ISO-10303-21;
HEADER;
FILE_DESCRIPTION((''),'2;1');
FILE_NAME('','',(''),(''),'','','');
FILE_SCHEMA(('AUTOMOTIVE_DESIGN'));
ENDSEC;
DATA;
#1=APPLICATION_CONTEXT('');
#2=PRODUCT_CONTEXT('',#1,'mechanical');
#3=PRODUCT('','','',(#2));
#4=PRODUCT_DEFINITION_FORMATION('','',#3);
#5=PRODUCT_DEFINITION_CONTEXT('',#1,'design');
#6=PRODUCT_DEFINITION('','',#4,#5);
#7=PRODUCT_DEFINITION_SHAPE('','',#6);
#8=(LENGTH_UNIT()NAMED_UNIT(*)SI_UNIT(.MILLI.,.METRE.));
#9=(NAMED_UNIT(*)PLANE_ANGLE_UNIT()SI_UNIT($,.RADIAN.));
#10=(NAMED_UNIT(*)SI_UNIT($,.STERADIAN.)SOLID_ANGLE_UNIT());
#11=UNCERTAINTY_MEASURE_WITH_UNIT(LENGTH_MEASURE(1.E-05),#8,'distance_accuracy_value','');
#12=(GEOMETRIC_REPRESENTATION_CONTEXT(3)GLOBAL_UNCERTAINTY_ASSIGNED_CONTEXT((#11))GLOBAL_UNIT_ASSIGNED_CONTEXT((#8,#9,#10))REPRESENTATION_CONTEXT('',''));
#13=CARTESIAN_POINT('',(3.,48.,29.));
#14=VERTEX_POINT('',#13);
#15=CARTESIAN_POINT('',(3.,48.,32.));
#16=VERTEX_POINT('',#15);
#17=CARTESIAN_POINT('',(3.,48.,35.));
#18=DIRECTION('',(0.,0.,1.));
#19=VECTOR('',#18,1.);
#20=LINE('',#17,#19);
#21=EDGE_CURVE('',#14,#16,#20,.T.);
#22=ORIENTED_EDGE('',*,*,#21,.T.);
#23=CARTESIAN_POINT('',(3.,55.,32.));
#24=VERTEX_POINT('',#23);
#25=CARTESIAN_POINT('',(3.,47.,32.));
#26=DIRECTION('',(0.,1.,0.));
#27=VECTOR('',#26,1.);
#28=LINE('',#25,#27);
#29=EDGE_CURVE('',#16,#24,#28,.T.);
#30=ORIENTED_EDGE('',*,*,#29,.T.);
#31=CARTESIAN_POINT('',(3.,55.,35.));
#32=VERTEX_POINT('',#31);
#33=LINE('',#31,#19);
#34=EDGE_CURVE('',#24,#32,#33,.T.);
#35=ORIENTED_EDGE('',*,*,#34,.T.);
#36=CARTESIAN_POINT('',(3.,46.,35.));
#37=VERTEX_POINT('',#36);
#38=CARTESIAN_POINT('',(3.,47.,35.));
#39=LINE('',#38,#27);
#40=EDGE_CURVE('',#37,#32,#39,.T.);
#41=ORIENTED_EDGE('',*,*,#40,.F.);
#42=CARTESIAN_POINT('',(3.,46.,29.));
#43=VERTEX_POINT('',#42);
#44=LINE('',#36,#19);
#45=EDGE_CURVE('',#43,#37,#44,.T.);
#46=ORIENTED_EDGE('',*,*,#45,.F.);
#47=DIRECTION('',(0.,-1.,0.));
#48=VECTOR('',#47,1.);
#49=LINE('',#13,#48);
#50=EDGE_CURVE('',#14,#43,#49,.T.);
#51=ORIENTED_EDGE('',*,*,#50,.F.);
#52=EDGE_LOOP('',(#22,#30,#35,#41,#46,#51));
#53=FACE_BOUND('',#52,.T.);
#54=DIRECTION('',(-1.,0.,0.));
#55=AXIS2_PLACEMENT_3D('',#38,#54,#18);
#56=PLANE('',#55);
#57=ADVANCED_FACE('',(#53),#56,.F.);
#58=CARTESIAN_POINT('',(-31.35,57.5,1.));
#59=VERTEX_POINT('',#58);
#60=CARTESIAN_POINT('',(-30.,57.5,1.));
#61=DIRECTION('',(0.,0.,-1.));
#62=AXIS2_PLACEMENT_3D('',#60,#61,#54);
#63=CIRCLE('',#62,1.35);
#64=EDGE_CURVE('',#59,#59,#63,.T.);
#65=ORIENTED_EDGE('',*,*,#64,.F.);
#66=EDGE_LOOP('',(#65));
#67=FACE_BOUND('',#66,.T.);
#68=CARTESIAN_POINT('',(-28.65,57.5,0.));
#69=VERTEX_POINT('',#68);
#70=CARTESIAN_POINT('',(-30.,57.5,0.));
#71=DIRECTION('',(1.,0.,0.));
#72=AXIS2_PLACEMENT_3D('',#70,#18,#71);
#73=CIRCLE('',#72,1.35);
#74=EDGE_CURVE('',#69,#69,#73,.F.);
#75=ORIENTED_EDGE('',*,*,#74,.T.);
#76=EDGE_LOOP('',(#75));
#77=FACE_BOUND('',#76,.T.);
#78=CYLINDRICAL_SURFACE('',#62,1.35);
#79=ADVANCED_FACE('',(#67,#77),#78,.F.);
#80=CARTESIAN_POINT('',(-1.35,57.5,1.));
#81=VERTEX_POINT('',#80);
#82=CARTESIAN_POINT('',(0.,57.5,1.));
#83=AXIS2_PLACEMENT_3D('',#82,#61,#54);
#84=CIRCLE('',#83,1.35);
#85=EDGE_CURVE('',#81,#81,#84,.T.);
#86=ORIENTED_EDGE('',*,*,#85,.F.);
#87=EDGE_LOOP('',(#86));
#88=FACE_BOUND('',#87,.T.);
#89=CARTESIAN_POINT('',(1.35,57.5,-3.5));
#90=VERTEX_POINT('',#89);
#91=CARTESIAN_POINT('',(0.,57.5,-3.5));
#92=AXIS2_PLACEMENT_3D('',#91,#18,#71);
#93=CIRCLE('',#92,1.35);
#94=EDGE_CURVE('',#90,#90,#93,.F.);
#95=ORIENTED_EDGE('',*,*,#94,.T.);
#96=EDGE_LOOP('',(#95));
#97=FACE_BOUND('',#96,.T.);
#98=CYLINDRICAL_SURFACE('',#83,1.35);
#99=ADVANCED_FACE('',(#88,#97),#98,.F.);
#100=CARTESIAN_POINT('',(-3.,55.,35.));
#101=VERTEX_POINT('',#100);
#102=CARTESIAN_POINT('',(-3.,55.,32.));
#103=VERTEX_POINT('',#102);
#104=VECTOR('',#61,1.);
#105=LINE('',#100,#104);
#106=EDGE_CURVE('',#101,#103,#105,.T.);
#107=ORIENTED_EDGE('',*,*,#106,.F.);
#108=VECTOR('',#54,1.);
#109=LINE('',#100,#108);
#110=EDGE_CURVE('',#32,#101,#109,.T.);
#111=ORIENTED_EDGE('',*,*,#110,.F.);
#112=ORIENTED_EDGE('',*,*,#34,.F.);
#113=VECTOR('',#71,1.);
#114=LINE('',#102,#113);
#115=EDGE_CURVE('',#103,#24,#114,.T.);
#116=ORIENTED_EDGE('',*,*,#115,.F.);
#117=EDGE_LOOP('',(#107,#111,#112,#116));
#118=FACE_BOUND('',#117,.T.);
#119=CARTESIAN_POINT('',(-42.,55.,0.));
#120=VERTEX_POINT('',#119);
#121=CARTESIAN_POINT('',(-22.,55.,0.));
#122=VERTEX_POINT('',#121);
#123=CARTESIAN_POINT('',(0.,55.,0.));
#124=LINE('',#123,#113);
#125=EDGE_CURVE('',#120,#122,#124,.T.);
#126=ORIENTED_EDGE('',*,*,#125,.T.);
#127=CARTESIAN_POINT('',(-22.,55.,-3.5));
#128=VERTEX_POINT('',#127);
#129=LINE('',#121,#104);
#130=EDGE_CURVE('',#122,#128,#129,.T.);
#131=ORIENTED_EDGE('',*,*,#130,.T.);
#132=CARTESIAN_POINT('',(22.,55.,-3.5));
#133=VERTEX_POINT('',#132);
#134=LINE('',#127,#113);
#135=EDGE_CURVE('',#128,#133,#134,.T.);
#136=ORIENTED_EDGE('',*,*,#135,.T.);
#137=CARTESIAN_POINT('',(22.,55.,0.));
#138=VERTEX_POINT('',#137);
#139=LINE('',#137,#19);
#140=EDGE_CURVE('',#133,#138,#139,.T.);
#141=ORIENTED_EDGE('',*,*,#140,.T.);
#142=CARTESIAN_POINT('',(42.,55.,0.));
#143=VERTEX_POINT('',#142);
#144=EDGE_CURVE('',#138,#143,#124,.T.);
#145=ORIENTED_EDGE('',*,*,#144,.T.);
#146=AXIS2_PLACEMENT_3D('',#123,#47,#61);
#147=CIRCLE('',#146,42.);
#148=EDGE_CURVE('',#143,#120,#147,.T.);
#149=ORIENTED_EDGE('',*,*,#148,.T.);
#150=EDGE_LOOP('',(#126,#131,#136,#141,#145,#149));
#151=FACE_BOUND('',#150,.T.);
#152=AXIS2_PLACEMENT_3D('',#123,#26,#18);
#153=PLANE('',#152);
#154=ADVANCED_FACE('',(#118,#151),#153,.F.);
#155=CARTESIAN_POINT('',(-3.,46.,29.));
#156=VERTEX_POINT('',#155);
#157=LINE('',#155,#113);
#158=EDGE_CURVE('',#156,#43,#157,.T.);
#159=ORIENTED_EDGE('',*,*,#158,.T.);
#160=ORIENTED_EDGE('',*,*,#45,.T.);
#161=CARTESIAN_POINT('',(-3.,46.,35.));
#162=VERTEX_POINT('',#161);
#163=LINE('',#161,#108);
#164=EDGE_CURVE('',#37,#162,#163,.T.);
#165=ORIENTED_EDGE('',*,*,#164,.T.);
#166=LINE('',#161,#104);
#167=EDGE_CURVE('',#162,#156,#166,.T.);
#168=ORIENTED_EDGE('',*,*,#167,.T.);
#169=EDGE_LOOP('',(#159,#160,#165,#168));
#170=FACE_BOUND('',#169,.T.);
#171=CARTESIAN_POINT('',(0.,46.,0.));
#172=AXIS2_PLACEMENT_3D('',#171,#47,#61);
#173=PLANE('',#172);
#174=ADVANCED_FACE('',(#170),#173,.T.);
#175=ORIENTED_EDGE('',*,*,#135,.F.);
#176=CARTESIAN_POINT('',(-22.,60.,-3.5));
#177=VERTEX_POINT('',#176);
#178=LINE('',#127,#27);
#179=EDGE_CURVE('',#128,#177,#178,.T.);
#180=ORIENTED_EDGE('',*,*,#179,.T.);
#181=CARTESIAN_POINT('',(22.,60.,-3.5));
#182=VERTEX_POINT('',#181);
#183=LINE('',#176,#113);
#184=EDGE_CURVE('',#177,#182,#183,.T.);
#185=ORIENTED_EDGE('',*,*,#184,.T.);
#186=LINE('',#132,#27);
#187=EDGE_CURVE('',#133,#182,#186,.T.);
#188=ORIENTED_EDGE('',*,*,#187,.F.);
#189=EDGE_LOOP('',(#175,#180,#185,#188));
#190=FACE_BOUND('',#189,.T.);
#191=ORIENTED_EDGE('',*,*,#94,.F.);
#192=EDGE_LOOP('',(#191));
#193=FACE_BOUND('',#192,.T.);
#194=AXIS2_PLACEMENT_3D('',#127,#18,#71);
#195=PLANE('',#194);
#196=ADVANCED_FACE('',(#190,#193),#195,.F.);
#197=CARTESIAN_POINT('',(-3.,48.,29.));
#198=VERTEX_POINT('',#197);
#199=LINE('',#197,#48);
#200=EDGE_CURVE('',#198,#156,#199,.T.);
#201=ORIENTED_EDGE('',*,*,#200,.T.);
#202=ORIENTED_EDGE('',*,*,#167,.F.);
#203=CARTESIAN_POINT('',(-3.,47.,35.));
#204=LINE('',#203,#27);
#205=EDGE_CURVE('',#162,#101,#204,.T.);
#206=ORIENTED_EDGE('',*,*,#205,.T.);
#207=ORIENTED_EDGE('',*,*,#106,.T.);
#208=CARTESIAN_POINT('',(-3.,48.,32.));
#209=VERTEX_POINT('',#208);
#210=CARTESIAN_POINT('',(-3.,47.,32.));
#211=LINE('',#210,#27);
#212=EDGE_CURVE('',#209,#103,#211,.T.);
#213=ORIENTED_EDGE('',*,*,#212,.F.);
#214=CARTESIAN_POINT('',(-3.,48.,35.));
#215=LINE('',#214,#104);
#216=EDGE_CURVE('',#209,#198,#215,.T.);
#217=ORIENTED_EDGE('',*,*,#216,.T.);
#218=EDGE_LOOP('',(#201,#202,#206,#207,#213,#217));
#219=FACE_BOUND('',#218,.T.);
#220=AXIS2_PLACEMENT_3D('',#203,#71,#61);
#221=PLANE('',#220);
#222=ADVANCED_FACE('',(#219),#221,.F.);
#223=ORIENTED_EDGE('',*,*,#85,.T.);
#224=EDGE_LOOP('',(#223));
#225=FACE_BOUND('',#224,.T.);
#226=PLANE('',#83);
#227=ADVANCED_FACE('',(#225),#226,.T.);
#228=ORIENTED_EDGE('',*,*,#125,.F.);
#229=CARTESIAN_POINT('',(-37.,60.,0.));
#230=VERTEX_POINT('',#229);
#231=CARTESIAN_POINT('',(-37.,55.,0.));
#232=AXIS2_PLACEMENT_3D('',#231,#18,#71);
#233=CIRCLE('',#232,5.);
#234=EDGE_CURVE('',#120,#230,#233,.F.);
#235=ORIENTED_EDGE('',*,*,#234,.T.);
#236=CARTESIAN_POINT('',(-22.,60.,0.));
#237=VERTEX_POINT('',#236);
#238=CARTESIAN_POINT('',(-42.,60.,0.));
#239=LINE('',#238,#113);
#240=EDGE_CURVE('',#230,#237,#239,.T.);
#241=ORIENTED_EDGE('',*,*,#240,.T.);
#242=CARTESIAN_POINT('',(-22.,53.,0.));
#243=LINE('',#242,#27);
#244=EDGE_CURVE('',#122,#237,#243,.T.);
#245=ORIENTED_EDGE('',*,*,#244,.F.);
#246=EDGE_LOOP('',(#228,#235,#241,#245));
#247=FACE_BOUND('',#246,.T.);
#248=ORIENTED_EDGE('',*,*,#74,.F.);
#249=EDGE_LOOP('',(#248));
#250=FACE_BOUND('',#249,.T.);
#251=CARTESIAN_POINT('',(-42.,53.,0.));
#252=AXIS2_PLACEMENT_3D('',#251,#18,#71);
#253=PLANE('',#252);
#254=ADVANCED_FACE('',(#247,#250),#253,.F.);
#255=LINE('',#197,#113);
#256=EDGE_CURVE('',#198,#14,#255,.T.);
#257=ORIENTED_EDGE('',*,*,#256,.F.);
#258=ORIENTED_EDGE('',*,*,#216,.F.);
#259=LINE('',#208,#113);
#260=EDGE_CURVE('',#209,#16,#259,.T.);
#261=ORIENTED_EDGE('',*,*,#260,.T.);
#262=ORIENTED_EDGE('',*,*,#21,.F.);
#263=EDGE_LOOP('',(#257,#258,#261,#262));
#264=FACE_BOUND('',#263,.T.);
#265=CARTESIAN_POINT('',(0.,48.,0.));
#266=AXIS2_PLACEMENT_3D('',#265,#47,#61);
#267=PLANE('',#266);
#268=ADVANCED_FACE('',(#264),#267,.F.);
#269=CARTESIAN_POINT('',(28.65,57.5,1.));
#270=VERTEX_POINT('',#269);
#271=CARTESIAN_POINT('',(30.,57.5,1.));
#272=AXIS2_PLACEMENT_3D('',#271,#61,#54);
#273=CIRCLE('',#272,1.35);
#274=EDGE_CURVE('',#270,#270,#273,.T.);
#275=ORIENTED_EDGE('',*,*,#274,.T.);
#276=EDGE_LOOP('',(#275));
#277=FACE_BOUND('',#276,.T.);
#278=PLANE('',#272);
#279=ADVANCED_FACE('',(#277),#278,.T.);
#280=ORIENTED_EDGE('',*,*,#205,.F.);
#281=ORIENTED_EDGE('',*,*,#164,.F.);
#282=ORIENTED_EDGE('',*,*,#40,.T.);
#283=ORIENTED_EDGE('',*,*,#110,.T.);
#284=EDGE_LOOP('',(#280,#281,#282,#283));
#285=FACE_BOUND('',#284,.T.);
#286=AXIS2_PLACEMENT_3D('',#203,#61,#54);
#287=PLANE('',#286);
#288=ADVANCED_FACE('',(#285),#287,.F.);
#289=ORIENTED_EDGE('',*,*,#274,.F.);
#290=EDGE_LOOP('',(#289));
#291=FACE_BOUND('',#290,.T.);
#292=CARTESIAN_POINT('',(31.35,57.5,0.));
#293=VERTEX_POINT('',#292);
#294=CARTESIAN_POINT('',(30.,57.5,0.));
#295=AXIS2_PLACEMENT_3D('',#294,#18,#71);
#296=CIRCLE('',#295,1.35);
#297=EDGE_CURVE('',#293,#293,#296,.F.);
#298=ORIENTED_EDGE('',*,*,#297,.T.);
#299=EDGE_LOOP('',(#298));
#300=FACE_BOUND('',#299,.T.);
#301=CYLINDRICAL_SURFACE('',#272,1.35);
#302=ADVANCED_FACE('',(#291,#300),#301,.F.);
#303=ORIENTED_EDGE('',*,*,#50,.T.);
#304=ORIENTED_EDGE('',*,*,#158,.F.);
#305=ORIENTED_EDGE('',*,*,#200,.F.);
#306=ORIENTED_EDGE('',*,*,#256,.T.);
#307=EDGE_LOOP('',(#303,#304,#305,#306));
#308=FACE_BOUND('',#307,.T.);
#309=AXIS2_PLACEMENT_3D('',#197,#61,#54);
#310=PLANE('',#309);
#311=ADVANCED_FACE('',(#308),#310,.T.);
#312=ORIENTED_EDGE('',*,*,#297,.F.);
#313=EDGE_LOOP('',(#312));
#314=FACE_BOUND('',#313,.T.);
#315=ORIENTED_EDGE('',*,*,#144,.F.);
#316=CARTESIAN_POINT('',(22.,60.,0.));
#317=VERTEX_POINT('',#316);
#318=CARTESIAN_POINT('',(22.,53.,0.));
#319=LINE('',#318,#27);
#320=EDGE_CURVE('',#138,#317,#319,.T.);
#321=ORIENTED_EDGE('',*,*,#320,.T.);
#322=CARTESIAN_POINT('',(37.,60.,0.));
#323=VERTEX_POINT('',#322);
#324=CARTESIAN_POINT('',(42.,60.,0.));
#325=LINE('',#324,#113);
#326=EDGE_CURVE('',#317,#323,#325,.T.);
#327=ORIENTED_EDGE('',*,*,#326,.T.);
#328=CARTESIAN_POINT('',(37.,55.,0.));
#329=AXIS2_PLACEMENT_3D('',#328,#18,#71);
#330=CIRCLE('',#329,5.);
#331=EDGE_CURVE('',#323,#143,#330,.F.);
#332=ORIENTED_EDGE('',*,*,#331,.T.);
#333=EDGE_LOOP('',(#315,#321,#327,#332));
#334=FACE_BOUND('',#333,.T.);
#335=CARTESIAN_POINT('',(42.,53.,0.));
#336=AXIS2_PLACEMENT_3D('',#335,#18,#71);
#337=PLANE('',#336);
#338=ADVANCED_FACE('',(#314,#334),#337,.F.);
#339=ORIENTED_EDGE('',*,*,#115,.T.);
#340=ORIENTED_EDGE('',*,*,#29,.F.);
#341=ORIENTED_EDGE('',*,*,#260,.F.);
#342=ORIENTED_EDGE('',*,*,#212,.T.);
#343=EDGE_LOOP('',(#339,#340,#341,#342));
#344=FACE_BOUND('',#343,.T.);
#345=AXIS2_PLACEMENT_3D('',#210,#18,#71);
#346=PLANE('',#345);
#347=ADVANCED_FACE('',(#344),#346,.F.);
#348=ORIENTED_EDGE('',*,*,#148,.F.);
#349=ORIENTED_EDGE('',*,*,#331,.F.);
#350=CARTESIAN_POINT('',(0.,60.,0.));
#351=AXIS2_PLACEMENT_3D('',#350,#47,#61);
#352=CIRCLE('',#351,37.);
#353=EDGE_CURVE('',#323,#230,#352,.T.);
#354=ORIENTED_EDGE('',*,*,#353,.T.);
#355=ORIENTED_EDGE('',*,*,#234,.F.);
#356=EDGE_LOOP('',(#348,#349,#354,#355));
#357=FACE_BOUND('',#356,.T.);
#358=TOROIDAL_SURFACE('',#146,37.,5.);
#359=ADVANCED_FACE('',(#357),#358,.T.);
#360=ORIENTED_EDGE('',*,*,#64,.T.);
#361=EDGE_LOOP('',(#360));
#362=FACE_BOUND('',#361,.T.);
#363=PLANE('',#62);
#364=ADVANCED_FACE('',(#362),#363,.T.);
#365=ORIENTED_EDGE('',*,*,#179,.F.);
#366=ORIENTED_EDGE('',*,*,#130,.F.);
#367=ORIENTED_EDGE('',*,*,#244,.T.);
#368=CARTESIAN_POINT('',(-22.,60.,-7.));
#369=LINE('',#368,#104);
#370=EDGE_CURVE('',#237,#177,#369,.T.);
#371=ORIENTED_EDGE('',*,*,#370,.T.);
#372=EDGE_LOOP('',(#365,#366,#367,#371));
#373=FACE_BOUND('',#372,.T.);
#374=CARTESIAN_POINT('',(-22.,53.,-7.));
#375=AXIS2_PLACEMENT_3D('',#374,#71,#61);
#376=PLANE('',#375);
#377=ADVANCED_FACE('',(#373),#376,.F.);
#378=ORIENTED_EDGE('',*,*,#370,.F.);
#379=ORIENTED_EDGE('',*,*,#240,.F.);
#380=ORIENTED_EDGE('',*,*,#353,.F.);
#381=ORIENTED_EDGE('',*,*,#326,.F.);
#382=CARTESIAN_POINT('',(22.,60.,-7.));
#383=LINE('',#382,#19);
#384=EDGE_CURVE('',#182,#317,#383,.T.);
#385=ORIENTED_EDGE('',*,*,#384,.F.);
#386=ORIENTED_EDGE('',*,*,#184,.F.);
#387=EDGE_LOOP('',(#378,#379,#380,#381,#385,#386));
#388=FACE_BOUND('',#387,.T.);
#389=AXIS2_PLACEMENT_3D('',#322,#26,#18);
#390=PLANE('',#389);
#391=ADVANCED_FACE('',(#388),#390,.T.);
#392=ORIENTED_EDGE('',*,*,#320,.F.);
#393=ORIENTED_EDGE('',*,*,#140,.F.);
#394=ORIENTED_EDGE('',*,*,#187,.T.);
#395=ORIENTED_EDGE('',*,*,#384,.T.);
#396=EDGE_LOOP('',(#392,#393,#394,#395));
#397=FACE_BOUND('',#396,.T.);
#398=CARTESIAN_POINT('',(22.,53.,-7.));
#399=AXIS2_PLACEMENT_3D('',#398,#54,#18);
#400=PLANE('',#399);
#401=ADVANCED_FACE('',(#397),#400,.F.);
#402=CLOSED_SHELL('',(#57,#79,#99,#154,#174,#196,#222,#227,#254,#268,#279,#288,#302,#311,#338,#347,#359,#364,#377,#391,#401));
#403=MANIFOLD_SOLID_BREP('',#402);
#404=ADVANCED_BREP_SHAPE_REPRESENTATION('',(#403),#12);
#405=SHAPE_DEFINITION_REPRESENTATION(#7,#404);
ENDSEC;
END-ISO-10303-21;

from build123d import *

# Parameters (mm, degrees)
CUT_EXTRUDE1_DEPTH       = 5
CUT_EXTRUDE3_DEPTH       = 45
SKETCH8_R                = 40
CUT_EXTRUDE4_DEPTH       = 32
SKETCH9_R                = 32
SKETCH9_R_2              = 24.5
CUT_EXTRUDE5_DEPTH       = 14
SKETCH10_R               = 26
CUT_EXTRUDE6_DEPTH       = 14
FILLET1_R                = 7
FILLET2_R                = 7
CUT_REVOLVE1_START       = 22
CUT_REVOLVE1_DEPTH       = 30.5
CUT_EXTRUDE12_DEPTH      = 5
SKETCH18_W               = 13
SKETCH18_H               = 8
CUT_EXTRUDE13_DEPTH      = 5
INTERSECT1_OUTLINE_R     = 42
INTERSECT1_DEPTH         = 55
SKETCH20_W               = 6
SKETCH20_H               = 3
BOSS_EXTRUDE1_DEPTH      = 8
BOSS_EXTRUDE2_DEPTH      = 1
BOSS_EXTRUDE2_DEPTH_BACK = 1
SKETCH21_W               = 6
SKETCH21_H               = 6
BOSS_EXTRUDE3_DEPTH      = 7
SKETCH19_R               = 1.35
CUT_EXTRUDE14_DEPTH      = 8
SKETCH23_W               = 20
SKETCH23_H               = 7
CUT_EXTRUDE15_DEPTH      = 7
SKETCH24_W               = 44
SKETCH24_H               = 3.5
CUT_EXTRUDE16_DEPTH      = 5


with BuildPart() as part:
    # Sketch1 → Revolve1 (revolve)
    with BuildSketch(Plane.XY, mode=Mode.PRIVATE) as revolve1_sk:
        with BuildLine():
            Line((22.5, 0), (32, 0))
            ThreePointArc((32, 0), (33.414213562, 0.585786438), (34, 2))
            Line((34, 2), (34, 18))
            Line((34, 18), (40, 18))
            ThreePointArc((40, 18), (41.414213562, 18.585786438), (42, 20))
            Line((42, 20), (42, 55))
            ThreePointArc((42, 55), (40.535533906, 58.535533906), (37, 60))
            Line((37, 60), (0, 60))
            Line((0, 60), (0, 18))
            Line((0, 18), (22.5, 18))
            Line((22.5, 18), (22.5, 0))
        make_face()
    revolve(revolve1_sk.sketch.rotate(Axis((0, 2, 0), (0, 1, 0)), 90), axis=Axis((0, 2, 0), (0, 1, 0)))

    # Sketch5 → Cut-Extrude1 (cut)
    with BuildSketch(Plane(origin=(0, 60, 0), x_dir=(1, 0, 0), z_dir=(0, 1, 0))):
        with BuildLine():
            Line((-42, 0), (-40, 0))
            Line((-40, 0), (40, 0))
            Line((40, 0), (42, 0))
            ThreePointArc((42, 0), (0, 42), (-42, 0))
        make_face()
    extrude(amount=-CUT_EXTRUDE1_DEPTH, mode=Mode.SUBTRACT)

    # Sketch7 → Cut-Extrude3 (cut)
    with BuildSketch(Plane.XZ.offset(-18)):
        with BuildLine():
            Line((-21, 0), (21, 0))
            ThreePointArc((21, 0), (0, -21), (-21, 0))
        make_face()
    extrude(amount=-CUT_EXTRUDE3_DEPTH, mode=Mode.SUBTRACT)

    # Sketch8 → Cut-Extrude4 (cut)
    with BuildSketch(Plane(origin=(0, 52.5, 0), x_dir=(1, 0, 0), z_dir=(0, 1, 0))):
        with Locations(Location((0, 0, 0), (0, 0, 270))):
            Circle(SKETCH8_R)
        with BuildLine():
            Line((22.912878475, -2), (-22.912878475, -2))
            ThreePointArc((-22.912878475, -2), (0, 23), (22.912878475, -2))
        make_face(mode=Mode.SUBTRACT)
    extrude(amount=-CUT_EXTRUDE4_DEPTH, mode=Mode.SUBTRACT)

    # Sketch9 → Cut-Extrude5 (cut)
    with BuildSketch(Plane(origin=(0, 2, 0), x_dir=(-1, 0, 0), z_dir=(0, -1, 0))):
        with Locations(Location((0, 0, 0), (0, 0, 90))):
            Circle(SKETCH9_R)
        with Locations(Location((0, 0, 0), (0, 0, 90))):
            Circle(SKETCH9_R_2, mode=Mode.SUBTRACT)
    extrude(amount=-CUT_EXTRUDE5_DEPTH, mode=Mode.SUBTRACT)

    # Sketch10 → Cut-Extrude6 (cut)
    with BuildSketch(Plane(origin=(0, 2, 0), x_dir=(-1, 0, 0), z_dir=(0, -1, 0))):
        Circle(SKETCH10_R)
    extrude(amount=-CUT_EXTRUDE6_DEPTH, mode=Mode.SUBTRACT)

    # Fillet1
    fillet1_edges = [part.edges().sort_by_distance(p)[0] for p in [
        (21, 36.5, 0),
        (-21, 36.5, 0),
    ]]
    fillet(fillet1_edges, radius=FILLET1_R)

    # Fillet2
    fillet2_edges = [part.edges().sort_by_distance(p)[0] for p in [
        (-22.912878475, 36.5, 2),
        (22.912878475, 36.5, 2),
    ]]
    fillet(fillet2_edges, radius=FILLET2_R)

    # Cut-Revolve1: read off the stored shape, not the designer's step
    # Cut-Revolve1 outline → Cut-Revolve1 (cut)
    with BuildSketch(Plane(origin=(0, 0, 0), x_dir=(1, 0, 0), z_dir=(0, 1, 0)).offset(CUT_REVOLVE1_START)):
        with BuildLine():
            Line((-34.641016151, -20), (-36.373066959, -21))
            ThreePointArc((-36.373066959, -21), (0, -42), (36.373066959, -21))
            Line((36.373066959, -21), (34.641016151, -20))
            ThreePointArc((34.641016151, -20), (0, -40), (-34.641016151, -20))
        make_face()
    extrude(amount=CUT_REVOLVE1_DEPTH, mode=Mode.SUBTRACT)

    # Sketch15 → Cut-Extrude12 (cut)
    with BuildSketch(Plane(origin=(0, 20.5, 0), x_dir=(1, 0, 0), z_dir=(0, 1, 0))):
        with BuildLine():
            Line((-28.124355653, -3.514579578), (-26.124355653, -3.514579578))
            ThreePointArc((-26.124355653, -3.514579578), (-24.710142091, -2.928793141), (-24.124355653, -1.514579578))
            Line((-24.124355653, -1.514579578), (-24.124355653, 8.485420422))
            ThreePointArc((-24.124355653, 8.485420422), (-24.710142091, 9.899633984), (-26.124355653, 10.485420422))
            Line((-26.124355653, 10.485420422), (-28.124355653, 10.485420422))
            ThreePointArc((-28.124355653, 10.485420422), (-29.538569215, 9.899633984), (-30.124355653, 8.485420422))
            Line((-30.124355653, 8.485420422), (-30.124355653, -1.514579578))
            ThreePointArc((-30.124355653, -1.514579578), (-29.538569215, -2.928793141), (-28.124355653, -3.514579578))
        make_face()
    extrude(amount=-CUT_EXTRUDE12_DEPTH, mode=Mode.SUBTRACT)

    # Sketch18 → Cut-Extrude13 (cut)
    with BuildSketch(Plane(origin=(0, 55, 0), x_dir=(1, 0, 0), z_dir=(0, 1, 0))):
        with Locations((0.796512215, 32.951769165)):
            Rectangle(SKETCH18_W, SKETCH18_H)
    extrude(amount=-CUT_EXTRUDE13_DEPTH, mode=Mode.SUBTRACT)

    # Intersect1: read off the stored shape, not the designer's step
    # Intersect1 outline → Intersect1 (cut)
    with BuildSketch(Plane(origin=(0, 0, 0), x_dir=(1, 0, 0), z_dir=(0, 1, 0))):
        Circle(INTERSECT1_OUTLINE_R)
        with BuildLine():
            Line((12.124355653, 0), (-12.124355653, 0))
            ThreePointArc((-12.124355653, 0), (-18.186533479, 3.5), (-18.186533479, 10.5))
            ThreePointArc((-18.186533479, 10.5), (0, 21), (18.186533479, 10.5))
            ThreePointArc((18.186533479, 10.5), (18.186533479, 3.5), (12.124355653, 0))
        make_face(mode=Mode.SUBTRACT)
    extrude(amount=INTERSECT1_DEPTH, mode=Mode.SUBTRACT)

    # Sketch20 → Boss-Extrude1 (add)
    with BuildSketch(Plane.XZ.offset(-55)):
        with Locations((0, 33.5)):
            Rectangle(SKETCH20_W, SKETCH20_H)
    extrude(amount=BOSS_EXTRUDE1_DEPTH)

    # Sketch21 → Boss-Extrude2 (add, two sides: drawn at the far end of the back side and taken through both)
    with BuildSketch(Plane.XZ.offset(-47).offset(-BOSS_EXTRUDE2_DEPTH_BACK)):
        with Locations((0, 32)):
            Rectangle(SKETCH21_W, SKETCH21_H)
    extrude(amount=BOSS_EXTRUDE2_DEPTH + BOSS_EXTRUDE2_DEPTH_BACK)

    # Sketch22 → Boss-Extrude3 (add)
    with BuildSketch(Plane(origin=(0, 0, 0), x_dir=(-1, 0, 0), z_dir=(0, 0, -1))):
        with BuildLine():
            Line((-42, 55), (42, 55))
            ThreePointArc((42, 55), (40.535533906, 58.535533906), (37, 60))
            Line((37, 60), (-37, 60))
            ThreePointArc((-37, 60), (-40.535533906, 58.535533906), (-42, 55))
        make_face()
    extrude(amount=BOSS_EXTRUDE3_DEPTH)

    # Sketch19 → Cut-Extrude14 (cut)
    with BuildSketch(Plane(origin=(0, 0, -7), x_dir=(-1, 0, 0), z_dir=(0, 0, -1))):
        with Locations((0, 57.5)):
            Circle(SKETCH19_R)
        with Locations((-30, 57.5)):
            Circle(SKETCH19_R)
        with Locations((30, 57.5)):
            Circle(SKETCH19_R)
    extrude(amount=-CUT_EXTRUDE14_DEPTH, mode=Mode.SUBTRACT)

    # Sketch23 → Cut-Extrude15 (cut)
    with BuildSketch(Plane(origin=(0, 60, 0), x_dir=(1, 0, 0), z_dir=(0, 1, 0))):
        with Locations((-32, 3.5)):
            Rectangle(SKETCH23_W, SKETCH23_H)
        with Locations((32, 3.5)):
            Rectangle(SKETCH23_W, SKETCH23_H)
    extrude(amount=-CUT_EXTRUDE15_DEPTH, mode=Mode.SUBTRACT)

    # Sketch24 → Cut-Extrude16 (cut)
    with BuildSketch(Plane(origin=(0, 60, 0), x_dir=(1, 0, 0), z_dir=(0, 1, 0))):
        with Locations((0, 5.25)):
            Rectangle(SKETCH24_W, SKETCH24_H)
    extrude(amount=-CUT_EXTRUDE16_DEPTH, mode=Mode.SUBTRACT)


solid = part.part
